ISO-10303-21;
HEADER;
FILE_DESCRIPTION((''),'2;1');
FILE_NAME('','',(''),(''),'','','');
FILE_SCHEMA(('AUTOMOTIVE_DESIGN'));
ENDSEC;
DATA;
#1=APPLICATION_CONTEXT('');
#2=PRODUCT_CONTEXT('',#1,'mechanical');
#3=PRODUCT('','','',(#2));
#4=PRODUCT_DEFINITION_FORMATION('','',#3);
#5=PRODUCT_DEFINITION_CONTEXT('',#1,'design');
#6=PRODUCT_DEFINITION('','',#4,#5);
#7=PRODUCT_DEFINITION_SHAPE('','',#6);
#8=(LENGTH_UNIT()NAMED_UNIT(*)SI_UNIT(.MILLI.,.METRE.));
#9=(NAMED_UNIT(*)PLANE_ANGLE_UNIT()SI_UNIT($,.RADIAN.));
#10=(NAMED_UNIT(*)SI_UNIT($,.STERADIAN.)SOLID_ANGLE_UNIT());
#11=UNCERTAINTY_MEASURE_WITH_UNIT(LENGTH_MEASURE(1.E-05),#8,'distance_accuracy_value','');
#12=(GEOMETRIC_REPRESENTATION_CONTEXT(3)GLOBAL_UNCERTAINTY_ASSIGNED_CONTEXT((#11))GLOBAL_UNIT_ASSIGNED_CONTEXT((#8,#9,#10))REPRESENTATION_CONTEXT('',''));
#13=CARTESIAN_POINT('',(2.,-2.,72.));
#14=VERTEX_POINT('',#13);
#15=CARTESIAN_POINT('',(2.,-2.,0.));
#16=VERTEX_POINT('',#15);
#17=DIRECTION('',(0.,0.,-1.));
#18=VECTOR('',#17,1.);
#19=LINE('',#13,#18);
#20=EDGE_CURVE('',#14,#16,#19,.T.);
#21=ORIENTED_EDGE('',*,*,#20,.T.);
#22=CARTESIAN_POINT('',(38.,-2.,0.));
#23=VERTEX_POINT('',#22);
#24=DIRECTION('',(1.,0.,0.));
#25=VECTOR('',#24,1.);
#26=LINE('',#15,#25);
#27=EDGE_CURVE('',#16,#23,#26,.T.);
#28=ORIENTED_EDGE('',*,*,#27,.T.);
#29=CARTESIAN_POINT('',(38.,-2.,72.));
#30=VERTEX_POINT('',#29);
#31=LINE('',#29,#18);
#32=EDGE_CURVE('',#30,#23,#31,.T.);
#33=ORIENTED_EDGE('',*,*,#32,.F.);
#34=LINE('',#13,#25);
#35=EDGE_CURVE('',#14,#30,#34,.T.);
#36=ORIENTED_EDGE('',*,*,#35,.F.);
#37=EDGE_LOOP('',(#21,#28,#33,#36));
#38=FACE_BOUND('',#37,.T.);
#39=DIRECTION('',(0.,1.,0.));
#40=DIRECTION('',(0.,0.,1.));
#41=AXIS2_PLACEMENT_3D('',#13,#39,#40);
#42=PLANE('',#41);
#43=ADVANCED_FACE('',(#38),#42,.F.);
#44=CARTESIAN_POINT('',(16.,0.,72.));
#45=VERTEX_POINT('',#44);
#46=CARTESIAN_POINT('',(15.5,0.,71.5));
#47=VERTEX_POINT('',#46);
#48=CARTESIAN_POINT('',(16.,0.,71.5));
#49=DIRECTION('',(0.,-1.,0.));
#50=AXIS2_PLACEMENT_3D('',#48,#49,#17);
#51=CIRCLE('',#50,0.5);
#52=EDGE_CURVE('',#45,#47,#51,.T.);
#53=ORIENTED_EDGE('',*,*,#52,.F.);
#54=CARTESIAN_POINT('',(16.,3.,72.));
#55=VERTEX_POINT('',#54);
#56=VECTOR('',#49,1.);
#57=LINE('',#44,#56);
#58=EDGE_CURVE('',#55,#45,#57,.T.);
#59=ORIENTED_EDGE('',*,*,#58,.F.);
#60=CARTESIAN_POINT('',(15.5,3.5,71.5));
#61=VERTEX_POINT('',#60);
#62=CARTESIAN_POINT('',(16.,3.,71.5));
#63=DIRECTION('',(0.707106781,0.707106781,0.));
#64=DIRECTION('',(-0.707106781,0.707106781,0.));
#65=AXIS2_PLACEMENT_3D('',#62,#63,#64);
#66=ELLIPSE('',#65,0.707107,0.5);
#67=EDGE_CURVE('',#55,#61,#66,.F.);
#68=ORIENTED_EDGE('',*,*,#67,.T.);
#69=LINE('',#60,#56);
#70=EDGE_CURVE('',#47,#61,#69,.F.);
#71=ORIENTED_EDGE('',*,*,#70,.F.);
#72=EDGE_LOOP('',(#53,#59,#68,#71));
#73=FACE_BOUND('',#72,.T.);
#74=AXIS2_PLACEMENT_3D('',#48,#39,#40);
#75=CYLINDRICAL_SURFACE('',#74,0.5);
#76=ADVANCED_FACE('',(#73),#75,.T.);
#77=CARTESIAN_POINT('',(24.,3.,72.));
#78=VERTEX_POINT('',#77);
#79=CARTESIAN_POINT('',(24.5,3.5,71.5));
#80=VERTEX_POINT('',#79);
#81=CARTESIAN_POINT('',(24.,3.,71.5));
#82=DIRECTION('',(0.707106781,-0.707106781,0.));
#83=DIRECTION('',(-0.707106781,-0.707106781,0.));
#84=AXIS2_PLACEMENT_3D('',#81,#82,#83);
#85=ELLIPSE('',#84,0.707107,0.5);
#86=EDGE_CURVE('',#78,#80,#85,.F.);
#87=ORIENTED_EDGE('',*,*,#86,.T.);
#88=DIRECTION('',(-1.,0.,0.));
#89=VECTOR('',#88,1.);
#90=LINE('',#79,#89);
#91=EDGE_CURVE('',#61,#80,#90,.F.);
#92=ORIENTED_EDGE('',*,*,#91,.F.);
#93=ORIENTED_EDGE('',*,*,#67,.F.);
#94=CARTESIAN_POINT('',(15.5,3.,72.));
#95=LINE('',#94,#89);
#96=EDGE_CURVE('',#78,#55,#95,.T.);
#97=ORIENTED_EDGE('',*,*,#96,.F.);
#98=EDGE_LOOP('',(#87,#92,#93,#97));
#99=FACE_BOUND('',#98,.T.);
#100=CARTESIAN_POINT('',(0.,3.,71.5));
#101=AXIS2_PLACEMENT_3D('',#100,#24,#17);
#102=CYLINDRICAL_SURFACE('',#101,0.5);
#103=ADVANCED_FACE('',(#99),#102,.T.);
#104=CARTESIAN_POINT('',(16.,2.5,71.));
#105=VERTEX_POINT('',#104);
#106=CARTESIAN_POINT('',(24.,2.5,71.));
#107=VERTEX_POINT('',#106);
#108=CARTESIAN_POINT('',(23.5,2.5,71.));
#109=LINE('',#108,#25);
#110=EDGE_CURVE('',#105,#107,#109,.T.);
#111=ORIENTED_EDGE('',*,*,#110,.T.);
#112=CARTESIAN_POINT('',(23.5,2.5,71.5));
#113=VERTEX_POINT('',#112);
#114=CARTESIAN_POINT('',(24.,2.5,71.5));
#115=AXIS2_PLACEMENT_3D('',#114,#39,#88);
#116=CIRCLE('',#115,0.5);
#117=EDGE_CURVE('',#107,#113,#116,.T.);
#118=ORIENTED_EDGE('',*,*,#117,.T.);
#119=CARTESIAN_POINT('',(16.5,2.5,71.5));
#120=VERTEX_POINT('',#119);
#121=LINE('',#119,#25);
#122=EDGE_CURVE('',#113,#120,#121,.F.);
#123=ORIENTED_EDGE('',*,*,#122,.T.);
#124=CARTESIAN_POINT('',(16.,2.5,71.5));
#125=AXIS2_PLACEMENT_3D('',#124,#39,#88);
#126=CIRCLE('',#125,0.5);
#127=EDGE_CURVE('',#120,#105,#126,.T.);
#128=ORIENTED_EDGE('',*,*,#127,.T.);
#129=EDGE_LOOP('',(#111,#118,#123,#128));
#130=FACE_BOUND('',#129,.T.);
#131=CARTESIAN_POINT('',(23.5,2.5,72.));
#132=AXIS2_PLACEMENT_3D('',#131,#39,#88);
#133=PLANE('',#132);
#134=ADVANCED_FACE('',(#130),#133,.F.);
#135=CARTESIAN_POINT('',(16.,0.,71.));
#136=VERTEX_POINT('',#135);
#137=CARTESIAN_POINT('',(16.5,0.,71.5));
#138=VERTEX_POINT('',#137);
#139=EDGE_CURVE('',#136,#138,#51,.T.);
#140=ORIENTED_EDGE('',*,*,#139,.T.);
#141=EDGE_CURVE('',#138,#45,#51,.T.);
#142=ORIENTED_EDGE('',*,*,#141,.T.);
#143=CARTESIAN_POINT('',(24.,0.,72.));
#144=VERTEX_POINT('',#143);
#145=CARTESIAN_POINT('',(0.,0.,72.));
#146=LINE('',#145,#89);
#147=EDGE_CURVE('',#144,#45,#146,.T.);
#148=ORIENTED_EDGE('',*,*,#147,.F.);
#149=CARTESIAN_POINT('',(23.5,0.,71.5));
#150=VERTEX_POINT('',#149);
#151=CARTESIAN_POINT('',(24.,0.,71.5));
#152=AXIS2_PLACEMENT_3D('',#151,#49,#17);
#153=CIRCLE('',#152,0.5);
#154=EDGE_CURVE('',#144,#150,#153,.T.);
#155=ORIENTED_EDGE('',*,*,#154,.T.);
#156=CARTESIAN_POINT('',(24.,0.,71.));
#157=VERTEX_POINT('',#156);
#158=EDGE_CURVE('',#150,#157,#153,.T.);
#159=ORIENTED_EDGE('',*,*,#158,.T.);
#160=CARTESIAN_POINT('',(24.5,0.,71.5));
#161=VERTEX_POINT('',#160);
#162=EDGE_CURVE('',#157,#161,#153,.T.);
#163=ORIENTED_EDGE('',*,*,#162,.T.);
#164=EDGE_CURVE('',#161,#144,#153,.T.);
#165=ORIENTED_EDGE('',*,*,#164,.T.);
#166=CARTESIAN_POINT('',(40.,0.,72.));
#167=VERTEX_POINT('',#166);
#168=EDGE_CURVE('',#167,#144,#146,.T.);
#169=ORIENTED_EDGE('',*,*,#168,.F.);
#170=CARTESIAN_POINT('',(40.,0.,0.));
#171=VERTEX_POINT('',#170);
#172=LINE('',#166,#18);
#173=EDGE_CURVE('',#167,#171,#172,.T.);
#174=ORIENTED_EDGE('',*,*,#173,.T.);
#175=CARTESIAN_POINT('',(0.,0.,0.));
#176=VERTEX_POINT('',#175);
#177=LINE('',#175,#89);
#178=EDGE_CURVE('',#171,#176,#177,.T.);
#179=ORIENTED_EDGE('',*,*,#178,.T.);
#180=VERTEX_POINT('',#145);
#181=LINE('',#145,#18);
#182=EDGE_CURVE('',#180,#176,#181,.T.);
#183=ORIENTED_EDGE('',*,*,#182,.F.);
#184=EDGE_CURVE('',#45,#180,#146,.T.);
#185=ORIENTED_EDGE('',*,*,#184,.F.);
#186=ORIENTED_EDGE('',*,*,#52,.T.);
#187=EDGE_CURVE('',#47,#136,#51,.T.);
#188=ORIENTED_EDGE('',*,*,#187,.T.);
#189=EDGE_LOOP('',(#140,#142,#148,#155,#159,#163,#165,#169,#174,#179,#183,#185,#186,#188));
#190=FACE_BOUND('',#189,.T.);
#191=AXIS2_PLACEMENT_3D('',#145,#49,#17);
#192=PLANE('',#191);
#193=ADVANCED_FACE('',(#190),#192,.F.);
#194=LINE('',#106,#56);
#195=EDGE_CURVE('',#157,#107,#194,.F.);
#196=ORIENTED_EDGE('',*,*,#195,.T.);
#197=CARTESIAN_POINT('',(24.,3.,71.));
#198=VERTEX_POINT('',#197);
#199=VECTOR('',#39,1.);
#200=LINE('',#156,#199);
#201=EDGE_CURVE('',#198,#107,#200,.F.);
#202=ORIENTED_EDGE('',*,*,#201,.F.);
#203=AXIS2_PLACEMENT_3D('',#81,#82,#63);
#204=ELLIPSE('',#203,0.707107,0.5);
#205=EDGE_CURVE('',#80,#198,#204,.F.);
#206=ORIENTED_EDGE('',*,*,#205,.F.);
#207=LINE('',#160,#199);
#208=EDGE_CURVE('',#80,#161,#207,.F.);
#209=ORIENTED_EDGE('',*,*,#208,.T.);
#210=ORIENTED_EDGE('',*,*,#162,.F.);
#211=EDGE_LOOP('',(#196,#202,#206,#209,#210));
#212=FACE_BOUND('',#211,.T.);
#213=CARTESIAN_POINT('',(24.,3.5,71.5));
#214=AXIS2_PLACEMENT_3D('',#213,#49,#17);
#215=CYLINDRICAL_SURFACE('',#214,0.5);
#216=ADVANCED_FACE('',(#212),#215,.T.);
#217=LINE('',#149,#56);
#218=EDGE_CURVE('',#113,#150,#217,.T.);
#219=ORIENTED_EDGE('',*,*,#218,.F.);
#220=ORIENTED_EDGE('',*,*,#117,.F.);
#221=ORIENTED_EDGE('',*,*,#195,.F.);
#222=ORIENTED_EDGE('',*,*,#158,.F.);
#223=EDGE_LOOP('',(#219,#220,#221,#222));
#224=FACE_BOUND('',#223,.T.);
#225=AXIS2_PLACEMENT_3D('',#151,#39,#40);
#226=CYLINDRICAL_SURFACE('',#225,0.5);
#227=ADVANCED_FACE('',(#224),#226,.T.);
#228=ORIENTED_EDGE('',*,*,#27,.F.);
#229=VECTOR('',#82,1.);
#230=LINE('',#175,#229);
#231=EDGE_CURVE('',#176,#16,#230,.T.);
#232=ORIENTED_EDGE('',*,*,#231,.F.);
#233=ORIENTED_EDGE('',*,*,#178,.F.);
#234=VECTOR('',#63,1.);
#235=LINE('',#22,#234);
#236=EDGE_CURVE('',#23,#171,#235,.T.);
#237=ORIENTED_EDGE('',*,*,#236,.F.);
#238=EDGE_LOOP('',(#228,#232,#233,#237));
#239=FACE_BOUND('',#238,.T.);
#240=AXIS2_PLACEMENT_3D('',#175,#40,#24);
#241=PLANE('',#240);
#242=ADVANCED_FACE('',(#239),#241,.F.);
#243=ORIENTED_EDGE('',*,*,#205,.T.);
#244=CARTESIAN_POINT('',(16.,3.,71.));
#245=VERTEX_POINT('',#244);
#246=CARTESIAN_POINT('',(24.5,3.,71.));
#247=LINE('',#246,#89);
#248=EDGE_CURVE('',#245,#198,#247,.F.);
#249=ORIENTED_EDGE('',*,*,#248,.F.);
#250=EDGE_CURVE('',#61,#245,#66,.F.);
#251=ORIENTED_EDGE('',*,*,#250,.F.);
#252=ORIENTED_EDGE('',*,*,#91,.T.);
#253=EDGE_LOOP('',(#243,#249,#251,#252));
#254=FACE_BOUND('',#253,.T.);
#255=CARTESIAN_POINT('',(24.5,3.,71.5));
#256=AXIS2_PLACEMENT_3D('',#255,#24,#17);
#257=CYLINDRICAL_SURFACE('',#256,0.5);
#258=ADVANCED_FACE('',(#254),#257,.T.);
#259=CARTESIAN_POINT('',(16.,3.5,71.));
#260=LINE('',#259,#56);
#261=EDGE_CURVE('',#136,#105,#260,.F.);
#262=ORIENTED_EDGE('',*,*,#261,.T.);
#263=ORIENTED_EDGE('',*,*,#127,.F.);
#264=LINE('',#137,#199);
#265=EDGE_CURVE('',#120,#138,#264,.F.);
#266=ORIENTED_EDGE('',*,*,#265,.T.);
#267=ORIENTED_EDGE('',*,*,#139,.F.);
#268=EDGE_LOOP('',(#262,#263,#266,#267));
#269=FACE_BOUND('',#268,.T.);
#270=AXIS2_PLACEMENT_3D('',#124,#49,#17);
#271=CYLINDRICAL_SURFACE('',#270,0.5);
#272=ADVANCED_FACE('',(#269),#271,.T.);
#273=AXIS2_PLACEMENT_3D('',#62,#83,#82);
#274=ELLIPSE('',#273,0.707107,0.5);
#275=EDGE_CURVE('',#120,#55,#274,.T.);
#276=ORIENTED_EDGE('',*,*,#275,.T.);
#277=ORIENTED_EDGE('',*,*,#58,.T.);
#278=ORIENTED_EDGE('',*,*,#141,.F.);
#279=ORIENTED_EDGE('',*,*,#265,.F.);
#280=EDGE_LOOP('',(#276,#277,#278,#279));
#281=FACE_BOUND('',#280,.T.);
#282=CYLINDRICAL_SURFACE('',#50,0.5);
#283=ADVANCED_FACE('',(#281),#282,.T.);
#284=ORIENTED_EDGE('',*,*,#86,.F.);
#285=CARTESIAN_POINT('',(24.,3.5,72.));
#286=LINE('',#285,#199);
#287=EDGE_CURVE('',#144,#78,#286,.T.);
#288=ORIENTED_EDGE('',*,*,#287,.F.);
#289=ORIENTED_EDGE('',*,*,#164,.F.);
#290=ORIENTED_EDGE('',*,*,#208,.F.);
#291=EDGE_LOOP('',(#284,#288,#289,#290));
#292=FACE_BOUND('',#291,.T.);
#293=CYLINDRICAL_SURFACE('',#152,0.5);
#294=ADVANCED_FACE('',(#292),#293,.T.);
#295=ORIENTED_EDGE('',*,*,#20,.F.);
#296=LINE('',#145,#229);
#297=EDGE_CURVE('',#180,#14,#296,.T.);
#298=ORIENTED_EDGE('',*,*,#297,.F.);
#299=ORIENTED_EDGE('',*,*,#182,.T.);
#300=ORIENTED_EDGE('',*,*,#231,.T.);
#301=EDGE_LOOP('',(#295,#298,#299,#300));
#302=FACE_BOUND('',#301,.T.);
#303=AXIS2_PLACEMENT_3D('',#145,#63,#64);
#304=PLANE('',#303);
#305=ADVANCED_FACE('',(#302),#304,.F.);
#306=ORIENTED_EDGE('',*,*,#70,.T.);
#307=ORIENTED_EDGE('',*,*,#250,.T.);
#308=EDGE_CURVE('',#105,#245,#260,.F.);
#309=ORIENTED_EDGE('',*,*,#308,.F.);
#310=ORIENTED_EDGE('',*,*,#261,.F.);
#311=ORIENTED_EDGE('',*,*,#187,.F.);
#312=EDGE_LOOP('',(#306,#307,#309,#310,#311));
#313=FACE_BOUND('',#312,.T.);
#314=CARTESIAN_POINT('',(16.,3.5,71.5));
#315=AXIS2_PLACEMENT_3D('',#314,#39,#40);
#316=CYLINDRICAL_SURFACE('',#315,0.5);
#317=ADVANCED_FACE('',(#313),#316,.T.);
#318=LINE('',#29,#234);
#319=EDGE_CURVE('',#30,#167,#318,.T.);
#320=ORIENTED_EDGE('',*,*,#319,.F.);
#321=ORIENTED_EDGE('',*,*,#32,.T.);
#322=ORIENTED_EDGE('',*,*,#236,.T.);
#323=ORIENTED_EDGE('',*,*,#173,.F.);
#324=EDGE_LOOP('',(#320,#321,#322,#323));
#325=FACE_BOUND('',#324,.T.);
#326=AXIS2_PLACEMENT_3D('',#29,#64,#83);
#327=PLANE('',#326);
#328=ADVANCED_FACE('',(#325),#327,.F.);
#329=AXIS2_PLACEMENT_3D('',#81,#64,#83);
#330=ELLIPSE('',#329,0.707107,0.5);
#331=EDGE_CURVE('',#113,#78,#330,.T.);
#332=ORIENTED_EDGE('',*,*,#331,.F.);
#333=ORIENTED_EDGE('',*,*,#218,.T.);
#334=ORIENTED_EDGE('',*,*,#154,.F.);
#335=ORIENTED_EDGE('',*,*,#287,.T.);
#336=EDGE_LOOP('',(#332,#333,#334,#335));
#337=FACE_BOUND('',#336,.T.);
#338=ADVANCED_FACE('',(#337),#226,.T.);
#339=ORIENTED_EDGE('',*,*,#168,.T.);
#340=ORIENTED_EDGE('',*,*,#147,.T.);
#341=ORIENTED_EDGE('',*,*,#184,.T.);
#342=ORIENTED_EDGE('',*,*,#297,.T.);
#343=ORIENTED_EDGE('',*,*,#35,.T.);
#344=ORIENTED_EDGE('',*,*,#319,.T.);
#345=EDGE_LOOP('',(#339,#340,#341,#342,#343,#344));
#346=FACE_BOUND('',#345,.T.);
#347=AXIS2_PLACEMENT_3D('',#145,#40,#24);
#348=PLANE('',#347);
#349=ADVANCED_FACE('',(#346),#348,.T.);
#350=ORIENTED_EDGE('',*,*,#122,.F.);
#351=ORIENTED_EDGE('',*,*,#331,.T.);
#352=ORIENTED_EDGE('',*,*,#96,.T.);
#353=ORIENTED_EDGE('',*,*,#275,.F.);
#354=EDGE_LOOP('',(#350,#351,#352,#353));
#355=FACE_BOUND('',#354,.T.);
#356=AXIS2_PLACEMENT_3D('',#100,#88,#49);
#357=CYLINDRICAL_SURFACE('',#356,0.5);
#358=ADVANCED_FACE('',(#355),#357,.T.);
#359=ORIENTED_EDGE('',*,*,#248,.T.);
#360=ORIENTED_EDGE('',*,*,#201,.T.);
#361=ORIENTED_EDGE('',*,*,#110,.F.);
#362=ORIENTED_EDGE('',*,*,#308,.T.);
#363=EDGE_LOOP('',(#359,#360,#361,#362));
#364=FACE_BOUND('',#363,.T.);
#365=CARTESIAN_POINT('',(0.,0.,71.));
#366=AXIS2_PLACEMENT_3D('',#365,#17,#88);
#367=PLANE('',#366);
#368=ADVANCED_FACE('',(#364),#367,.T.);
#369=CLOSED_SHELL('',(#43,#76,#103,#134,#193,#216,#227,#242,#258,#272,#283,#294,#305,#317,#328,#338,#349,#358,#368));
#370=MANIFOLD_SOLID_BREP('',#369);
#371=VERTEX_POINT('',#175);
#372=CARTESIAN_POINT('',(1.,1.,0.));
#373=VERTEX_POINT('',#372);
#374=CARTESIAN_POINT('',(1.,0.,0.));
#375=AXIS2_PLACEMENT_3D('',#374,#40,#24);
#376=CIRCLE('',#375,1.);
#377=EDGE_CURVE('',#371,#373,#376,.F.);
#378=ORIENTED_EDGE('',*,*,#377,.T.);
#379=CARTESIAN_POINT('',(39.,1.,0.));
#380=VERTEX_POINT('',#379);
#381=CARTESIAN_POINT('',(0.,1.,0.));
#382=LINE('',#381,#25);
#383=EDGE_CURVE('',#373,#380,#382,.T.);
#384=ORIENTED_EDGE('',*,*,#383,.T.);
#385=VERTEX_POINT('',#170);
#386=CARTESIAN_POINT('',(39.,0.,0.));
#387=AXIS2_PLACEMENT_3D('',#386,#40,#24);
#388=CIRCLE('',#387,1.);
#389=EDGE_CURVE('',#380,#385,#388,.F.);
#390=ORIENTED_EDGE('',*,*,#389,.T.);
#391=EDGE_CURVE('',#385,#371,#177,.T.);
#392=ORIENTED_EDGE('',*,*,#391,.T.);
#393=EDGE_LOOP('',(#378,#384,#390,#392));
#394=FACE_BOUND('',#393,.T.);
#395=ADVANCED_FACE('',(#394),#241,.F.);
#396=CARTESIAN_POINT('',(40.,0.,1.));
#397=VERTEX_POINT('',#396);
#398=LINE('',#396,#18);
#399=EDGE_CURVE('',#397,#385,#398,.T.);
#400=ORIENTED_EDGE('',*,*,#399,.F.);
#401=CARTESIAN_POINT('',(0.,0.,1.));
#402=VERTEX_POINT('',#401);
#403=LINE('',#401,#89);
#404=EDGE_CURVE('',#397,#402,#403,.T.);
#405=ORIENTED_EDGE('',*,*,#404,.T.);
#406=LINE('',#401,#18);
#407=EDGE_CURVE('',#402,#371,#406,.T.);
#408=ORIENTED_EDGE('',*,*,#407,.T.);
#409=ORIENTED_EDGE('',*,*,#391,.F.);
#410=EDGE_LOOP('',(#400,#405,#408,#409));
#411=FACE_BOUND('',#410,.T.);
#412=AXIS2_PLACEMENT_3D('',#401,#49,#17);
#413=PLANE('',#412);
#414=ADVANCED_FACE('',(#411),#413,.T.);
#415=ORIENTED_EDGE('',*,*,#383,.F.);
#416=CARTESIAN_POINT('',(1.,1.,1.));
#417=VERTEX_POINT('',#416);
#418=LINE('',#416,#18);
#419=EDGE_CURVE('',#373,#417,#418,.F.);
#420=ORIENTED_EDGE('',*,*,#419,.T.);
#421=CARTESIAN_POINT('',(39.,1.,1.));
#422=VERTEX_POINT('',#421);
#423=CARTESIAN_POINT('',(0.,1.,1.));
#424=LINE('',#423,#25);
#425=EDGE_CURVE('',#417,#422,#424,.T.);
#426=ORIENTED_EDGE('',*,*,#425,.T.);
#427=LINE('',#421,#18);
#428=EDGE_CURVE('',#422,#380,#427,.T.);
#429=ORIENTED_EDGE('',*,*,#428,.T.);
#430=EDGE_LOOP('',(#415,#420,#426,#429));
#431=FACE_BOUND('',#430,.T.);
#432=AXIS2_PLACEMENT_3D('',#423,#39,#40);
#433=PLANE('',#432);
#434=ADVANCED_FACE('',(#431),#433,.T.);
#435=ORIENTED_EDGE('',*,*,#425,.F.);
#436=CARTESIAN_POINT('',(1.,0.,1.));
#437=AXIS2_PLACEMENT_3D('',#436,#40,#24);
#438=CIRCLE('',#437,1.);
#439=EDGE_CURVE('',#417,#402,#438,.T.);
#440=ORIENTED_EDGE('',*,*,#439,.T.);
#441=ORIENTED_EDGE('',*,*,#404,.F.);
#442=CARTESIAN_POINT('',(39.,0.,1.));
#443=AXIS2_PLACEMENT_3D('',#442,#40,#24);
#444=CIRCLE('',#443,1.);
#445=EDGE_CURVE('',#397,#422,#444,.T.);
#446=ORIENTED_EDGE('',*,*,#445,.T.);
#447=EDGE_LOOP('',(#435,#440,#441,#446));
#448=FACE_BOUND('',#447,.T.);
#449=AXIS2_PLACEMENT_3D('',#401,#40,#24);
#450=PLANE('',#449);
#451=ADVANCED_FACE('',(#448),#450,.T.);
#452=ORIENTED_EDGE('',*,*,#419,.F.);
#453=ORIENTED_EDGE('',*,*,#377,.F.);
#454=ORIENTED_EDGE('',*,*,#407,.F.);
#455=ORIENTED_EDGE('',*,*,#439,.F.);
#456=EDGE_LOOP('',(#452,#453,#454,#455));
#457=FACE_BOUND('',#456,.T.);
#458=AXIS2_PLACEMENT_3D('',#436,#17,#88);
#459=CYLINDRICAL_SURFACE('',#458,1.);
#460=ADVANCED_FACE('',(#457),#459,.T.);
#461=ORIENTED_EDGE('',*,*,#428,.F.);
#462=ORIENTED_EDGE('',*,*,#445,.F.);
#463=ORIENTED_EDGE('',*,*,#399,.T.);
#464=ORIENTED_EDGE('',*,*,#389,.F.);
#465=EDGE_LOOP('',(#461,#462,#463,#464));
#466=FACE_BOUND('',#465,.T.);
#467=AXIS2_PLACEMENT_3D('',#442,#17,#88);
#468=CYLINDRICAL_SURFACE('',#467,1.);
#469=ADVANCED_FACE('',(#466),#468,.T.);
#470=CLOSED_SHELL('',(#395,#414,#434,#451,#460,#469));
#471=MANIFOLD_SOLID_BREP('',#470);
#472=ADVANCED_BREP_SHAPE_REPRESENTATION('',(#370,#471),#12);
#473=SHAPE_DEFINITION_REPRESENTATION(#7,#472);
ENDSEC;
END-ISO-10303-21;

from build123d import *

# Parameters (mm, degrees)
BOSS_EXTRUDE7_DEPTH = 72
SKETCH9_W           = 40
SKETCH9_H           = 1
BOSS_EXTRUDE8_DEPTH = 1
FILLET2_R           = 1
BOSS_EXTRUDE9_START = 71
BOSS_EXTRUDE9_DEPTH = 1
FILLET3_R           = 0.5


with BuildPart() as part:
    # Sketch8 → Boss-Extrude7 (new body)
    with BuildSketch(Plane.XY):
        Polygon((0, 0), (40, 0), (38, -2), (2, -2), align=None)
    extrude(amount=BOSS_EXTRUDE7_DEPTH)

    # Sketch11 → Boss-Extrude9 (add)
    with BuildSketch(Plane.XY.offset(BOSS_EXTRUDE9_START)):
        Polygon((24.5, 3.5), (15.5, 3.5), (15.5, 0), (16.5, 0), (16.5, 2.5), (23.5, 2.5), (23.5, 0), (24.5, 0), align=None)
    extrude(amount=BOSS_EXTRUDE9_DEPTH)

    # Fillet3
    fillet3_edges = [part.edges().sort_by_distance(p)[0] for p in [
        (16.5, 1.25, 71),
        (24.5, 1.75, 71),
        (16.5, 1.25, 72),
        (20, 2.5, 72),
        (20, 3.5, 71),
        (20, 3.5, 72),
        (23.5, 1.25, 71),
        (23.5, 1.25, 72),
        (24.5, 1.75, 72),
        (15.5, 1.75, 71),
        (15.5, 1.75, 72),
    ]]
    fillet(fillet3_edges, radius=FILLET3_R - 0.0001)  # a hair under: the kernel refuses the full size


with BuildPart() as body_2:
    # Sketch9 → Boss-Extrude8 (new body)
    with BuildSketch(Plane(origin=(0, 0, 0), x_dir=(-1, 0, 0), z_dir=(0, 0, -1))):
        with Locations((-20, 0.5)):
            Rectangle(SKETCH9_W, SKETCH9_H)
    extrude(amount=-BOSS_EXTRUDE8_DEPTH)

    # Fillet2
    fillet2_edges = [body_2.edges().sort_by_distance(p)[0] for p in [
        (0, 1, 0.5),
        (40, 1, 0.5),
    ]]
    fillet(fillet2_edges, radius=FILLET2_R - 0.0001)  # a hair under: the kernel refuses the full size


solid = Compound([part.part, body_2.part])
